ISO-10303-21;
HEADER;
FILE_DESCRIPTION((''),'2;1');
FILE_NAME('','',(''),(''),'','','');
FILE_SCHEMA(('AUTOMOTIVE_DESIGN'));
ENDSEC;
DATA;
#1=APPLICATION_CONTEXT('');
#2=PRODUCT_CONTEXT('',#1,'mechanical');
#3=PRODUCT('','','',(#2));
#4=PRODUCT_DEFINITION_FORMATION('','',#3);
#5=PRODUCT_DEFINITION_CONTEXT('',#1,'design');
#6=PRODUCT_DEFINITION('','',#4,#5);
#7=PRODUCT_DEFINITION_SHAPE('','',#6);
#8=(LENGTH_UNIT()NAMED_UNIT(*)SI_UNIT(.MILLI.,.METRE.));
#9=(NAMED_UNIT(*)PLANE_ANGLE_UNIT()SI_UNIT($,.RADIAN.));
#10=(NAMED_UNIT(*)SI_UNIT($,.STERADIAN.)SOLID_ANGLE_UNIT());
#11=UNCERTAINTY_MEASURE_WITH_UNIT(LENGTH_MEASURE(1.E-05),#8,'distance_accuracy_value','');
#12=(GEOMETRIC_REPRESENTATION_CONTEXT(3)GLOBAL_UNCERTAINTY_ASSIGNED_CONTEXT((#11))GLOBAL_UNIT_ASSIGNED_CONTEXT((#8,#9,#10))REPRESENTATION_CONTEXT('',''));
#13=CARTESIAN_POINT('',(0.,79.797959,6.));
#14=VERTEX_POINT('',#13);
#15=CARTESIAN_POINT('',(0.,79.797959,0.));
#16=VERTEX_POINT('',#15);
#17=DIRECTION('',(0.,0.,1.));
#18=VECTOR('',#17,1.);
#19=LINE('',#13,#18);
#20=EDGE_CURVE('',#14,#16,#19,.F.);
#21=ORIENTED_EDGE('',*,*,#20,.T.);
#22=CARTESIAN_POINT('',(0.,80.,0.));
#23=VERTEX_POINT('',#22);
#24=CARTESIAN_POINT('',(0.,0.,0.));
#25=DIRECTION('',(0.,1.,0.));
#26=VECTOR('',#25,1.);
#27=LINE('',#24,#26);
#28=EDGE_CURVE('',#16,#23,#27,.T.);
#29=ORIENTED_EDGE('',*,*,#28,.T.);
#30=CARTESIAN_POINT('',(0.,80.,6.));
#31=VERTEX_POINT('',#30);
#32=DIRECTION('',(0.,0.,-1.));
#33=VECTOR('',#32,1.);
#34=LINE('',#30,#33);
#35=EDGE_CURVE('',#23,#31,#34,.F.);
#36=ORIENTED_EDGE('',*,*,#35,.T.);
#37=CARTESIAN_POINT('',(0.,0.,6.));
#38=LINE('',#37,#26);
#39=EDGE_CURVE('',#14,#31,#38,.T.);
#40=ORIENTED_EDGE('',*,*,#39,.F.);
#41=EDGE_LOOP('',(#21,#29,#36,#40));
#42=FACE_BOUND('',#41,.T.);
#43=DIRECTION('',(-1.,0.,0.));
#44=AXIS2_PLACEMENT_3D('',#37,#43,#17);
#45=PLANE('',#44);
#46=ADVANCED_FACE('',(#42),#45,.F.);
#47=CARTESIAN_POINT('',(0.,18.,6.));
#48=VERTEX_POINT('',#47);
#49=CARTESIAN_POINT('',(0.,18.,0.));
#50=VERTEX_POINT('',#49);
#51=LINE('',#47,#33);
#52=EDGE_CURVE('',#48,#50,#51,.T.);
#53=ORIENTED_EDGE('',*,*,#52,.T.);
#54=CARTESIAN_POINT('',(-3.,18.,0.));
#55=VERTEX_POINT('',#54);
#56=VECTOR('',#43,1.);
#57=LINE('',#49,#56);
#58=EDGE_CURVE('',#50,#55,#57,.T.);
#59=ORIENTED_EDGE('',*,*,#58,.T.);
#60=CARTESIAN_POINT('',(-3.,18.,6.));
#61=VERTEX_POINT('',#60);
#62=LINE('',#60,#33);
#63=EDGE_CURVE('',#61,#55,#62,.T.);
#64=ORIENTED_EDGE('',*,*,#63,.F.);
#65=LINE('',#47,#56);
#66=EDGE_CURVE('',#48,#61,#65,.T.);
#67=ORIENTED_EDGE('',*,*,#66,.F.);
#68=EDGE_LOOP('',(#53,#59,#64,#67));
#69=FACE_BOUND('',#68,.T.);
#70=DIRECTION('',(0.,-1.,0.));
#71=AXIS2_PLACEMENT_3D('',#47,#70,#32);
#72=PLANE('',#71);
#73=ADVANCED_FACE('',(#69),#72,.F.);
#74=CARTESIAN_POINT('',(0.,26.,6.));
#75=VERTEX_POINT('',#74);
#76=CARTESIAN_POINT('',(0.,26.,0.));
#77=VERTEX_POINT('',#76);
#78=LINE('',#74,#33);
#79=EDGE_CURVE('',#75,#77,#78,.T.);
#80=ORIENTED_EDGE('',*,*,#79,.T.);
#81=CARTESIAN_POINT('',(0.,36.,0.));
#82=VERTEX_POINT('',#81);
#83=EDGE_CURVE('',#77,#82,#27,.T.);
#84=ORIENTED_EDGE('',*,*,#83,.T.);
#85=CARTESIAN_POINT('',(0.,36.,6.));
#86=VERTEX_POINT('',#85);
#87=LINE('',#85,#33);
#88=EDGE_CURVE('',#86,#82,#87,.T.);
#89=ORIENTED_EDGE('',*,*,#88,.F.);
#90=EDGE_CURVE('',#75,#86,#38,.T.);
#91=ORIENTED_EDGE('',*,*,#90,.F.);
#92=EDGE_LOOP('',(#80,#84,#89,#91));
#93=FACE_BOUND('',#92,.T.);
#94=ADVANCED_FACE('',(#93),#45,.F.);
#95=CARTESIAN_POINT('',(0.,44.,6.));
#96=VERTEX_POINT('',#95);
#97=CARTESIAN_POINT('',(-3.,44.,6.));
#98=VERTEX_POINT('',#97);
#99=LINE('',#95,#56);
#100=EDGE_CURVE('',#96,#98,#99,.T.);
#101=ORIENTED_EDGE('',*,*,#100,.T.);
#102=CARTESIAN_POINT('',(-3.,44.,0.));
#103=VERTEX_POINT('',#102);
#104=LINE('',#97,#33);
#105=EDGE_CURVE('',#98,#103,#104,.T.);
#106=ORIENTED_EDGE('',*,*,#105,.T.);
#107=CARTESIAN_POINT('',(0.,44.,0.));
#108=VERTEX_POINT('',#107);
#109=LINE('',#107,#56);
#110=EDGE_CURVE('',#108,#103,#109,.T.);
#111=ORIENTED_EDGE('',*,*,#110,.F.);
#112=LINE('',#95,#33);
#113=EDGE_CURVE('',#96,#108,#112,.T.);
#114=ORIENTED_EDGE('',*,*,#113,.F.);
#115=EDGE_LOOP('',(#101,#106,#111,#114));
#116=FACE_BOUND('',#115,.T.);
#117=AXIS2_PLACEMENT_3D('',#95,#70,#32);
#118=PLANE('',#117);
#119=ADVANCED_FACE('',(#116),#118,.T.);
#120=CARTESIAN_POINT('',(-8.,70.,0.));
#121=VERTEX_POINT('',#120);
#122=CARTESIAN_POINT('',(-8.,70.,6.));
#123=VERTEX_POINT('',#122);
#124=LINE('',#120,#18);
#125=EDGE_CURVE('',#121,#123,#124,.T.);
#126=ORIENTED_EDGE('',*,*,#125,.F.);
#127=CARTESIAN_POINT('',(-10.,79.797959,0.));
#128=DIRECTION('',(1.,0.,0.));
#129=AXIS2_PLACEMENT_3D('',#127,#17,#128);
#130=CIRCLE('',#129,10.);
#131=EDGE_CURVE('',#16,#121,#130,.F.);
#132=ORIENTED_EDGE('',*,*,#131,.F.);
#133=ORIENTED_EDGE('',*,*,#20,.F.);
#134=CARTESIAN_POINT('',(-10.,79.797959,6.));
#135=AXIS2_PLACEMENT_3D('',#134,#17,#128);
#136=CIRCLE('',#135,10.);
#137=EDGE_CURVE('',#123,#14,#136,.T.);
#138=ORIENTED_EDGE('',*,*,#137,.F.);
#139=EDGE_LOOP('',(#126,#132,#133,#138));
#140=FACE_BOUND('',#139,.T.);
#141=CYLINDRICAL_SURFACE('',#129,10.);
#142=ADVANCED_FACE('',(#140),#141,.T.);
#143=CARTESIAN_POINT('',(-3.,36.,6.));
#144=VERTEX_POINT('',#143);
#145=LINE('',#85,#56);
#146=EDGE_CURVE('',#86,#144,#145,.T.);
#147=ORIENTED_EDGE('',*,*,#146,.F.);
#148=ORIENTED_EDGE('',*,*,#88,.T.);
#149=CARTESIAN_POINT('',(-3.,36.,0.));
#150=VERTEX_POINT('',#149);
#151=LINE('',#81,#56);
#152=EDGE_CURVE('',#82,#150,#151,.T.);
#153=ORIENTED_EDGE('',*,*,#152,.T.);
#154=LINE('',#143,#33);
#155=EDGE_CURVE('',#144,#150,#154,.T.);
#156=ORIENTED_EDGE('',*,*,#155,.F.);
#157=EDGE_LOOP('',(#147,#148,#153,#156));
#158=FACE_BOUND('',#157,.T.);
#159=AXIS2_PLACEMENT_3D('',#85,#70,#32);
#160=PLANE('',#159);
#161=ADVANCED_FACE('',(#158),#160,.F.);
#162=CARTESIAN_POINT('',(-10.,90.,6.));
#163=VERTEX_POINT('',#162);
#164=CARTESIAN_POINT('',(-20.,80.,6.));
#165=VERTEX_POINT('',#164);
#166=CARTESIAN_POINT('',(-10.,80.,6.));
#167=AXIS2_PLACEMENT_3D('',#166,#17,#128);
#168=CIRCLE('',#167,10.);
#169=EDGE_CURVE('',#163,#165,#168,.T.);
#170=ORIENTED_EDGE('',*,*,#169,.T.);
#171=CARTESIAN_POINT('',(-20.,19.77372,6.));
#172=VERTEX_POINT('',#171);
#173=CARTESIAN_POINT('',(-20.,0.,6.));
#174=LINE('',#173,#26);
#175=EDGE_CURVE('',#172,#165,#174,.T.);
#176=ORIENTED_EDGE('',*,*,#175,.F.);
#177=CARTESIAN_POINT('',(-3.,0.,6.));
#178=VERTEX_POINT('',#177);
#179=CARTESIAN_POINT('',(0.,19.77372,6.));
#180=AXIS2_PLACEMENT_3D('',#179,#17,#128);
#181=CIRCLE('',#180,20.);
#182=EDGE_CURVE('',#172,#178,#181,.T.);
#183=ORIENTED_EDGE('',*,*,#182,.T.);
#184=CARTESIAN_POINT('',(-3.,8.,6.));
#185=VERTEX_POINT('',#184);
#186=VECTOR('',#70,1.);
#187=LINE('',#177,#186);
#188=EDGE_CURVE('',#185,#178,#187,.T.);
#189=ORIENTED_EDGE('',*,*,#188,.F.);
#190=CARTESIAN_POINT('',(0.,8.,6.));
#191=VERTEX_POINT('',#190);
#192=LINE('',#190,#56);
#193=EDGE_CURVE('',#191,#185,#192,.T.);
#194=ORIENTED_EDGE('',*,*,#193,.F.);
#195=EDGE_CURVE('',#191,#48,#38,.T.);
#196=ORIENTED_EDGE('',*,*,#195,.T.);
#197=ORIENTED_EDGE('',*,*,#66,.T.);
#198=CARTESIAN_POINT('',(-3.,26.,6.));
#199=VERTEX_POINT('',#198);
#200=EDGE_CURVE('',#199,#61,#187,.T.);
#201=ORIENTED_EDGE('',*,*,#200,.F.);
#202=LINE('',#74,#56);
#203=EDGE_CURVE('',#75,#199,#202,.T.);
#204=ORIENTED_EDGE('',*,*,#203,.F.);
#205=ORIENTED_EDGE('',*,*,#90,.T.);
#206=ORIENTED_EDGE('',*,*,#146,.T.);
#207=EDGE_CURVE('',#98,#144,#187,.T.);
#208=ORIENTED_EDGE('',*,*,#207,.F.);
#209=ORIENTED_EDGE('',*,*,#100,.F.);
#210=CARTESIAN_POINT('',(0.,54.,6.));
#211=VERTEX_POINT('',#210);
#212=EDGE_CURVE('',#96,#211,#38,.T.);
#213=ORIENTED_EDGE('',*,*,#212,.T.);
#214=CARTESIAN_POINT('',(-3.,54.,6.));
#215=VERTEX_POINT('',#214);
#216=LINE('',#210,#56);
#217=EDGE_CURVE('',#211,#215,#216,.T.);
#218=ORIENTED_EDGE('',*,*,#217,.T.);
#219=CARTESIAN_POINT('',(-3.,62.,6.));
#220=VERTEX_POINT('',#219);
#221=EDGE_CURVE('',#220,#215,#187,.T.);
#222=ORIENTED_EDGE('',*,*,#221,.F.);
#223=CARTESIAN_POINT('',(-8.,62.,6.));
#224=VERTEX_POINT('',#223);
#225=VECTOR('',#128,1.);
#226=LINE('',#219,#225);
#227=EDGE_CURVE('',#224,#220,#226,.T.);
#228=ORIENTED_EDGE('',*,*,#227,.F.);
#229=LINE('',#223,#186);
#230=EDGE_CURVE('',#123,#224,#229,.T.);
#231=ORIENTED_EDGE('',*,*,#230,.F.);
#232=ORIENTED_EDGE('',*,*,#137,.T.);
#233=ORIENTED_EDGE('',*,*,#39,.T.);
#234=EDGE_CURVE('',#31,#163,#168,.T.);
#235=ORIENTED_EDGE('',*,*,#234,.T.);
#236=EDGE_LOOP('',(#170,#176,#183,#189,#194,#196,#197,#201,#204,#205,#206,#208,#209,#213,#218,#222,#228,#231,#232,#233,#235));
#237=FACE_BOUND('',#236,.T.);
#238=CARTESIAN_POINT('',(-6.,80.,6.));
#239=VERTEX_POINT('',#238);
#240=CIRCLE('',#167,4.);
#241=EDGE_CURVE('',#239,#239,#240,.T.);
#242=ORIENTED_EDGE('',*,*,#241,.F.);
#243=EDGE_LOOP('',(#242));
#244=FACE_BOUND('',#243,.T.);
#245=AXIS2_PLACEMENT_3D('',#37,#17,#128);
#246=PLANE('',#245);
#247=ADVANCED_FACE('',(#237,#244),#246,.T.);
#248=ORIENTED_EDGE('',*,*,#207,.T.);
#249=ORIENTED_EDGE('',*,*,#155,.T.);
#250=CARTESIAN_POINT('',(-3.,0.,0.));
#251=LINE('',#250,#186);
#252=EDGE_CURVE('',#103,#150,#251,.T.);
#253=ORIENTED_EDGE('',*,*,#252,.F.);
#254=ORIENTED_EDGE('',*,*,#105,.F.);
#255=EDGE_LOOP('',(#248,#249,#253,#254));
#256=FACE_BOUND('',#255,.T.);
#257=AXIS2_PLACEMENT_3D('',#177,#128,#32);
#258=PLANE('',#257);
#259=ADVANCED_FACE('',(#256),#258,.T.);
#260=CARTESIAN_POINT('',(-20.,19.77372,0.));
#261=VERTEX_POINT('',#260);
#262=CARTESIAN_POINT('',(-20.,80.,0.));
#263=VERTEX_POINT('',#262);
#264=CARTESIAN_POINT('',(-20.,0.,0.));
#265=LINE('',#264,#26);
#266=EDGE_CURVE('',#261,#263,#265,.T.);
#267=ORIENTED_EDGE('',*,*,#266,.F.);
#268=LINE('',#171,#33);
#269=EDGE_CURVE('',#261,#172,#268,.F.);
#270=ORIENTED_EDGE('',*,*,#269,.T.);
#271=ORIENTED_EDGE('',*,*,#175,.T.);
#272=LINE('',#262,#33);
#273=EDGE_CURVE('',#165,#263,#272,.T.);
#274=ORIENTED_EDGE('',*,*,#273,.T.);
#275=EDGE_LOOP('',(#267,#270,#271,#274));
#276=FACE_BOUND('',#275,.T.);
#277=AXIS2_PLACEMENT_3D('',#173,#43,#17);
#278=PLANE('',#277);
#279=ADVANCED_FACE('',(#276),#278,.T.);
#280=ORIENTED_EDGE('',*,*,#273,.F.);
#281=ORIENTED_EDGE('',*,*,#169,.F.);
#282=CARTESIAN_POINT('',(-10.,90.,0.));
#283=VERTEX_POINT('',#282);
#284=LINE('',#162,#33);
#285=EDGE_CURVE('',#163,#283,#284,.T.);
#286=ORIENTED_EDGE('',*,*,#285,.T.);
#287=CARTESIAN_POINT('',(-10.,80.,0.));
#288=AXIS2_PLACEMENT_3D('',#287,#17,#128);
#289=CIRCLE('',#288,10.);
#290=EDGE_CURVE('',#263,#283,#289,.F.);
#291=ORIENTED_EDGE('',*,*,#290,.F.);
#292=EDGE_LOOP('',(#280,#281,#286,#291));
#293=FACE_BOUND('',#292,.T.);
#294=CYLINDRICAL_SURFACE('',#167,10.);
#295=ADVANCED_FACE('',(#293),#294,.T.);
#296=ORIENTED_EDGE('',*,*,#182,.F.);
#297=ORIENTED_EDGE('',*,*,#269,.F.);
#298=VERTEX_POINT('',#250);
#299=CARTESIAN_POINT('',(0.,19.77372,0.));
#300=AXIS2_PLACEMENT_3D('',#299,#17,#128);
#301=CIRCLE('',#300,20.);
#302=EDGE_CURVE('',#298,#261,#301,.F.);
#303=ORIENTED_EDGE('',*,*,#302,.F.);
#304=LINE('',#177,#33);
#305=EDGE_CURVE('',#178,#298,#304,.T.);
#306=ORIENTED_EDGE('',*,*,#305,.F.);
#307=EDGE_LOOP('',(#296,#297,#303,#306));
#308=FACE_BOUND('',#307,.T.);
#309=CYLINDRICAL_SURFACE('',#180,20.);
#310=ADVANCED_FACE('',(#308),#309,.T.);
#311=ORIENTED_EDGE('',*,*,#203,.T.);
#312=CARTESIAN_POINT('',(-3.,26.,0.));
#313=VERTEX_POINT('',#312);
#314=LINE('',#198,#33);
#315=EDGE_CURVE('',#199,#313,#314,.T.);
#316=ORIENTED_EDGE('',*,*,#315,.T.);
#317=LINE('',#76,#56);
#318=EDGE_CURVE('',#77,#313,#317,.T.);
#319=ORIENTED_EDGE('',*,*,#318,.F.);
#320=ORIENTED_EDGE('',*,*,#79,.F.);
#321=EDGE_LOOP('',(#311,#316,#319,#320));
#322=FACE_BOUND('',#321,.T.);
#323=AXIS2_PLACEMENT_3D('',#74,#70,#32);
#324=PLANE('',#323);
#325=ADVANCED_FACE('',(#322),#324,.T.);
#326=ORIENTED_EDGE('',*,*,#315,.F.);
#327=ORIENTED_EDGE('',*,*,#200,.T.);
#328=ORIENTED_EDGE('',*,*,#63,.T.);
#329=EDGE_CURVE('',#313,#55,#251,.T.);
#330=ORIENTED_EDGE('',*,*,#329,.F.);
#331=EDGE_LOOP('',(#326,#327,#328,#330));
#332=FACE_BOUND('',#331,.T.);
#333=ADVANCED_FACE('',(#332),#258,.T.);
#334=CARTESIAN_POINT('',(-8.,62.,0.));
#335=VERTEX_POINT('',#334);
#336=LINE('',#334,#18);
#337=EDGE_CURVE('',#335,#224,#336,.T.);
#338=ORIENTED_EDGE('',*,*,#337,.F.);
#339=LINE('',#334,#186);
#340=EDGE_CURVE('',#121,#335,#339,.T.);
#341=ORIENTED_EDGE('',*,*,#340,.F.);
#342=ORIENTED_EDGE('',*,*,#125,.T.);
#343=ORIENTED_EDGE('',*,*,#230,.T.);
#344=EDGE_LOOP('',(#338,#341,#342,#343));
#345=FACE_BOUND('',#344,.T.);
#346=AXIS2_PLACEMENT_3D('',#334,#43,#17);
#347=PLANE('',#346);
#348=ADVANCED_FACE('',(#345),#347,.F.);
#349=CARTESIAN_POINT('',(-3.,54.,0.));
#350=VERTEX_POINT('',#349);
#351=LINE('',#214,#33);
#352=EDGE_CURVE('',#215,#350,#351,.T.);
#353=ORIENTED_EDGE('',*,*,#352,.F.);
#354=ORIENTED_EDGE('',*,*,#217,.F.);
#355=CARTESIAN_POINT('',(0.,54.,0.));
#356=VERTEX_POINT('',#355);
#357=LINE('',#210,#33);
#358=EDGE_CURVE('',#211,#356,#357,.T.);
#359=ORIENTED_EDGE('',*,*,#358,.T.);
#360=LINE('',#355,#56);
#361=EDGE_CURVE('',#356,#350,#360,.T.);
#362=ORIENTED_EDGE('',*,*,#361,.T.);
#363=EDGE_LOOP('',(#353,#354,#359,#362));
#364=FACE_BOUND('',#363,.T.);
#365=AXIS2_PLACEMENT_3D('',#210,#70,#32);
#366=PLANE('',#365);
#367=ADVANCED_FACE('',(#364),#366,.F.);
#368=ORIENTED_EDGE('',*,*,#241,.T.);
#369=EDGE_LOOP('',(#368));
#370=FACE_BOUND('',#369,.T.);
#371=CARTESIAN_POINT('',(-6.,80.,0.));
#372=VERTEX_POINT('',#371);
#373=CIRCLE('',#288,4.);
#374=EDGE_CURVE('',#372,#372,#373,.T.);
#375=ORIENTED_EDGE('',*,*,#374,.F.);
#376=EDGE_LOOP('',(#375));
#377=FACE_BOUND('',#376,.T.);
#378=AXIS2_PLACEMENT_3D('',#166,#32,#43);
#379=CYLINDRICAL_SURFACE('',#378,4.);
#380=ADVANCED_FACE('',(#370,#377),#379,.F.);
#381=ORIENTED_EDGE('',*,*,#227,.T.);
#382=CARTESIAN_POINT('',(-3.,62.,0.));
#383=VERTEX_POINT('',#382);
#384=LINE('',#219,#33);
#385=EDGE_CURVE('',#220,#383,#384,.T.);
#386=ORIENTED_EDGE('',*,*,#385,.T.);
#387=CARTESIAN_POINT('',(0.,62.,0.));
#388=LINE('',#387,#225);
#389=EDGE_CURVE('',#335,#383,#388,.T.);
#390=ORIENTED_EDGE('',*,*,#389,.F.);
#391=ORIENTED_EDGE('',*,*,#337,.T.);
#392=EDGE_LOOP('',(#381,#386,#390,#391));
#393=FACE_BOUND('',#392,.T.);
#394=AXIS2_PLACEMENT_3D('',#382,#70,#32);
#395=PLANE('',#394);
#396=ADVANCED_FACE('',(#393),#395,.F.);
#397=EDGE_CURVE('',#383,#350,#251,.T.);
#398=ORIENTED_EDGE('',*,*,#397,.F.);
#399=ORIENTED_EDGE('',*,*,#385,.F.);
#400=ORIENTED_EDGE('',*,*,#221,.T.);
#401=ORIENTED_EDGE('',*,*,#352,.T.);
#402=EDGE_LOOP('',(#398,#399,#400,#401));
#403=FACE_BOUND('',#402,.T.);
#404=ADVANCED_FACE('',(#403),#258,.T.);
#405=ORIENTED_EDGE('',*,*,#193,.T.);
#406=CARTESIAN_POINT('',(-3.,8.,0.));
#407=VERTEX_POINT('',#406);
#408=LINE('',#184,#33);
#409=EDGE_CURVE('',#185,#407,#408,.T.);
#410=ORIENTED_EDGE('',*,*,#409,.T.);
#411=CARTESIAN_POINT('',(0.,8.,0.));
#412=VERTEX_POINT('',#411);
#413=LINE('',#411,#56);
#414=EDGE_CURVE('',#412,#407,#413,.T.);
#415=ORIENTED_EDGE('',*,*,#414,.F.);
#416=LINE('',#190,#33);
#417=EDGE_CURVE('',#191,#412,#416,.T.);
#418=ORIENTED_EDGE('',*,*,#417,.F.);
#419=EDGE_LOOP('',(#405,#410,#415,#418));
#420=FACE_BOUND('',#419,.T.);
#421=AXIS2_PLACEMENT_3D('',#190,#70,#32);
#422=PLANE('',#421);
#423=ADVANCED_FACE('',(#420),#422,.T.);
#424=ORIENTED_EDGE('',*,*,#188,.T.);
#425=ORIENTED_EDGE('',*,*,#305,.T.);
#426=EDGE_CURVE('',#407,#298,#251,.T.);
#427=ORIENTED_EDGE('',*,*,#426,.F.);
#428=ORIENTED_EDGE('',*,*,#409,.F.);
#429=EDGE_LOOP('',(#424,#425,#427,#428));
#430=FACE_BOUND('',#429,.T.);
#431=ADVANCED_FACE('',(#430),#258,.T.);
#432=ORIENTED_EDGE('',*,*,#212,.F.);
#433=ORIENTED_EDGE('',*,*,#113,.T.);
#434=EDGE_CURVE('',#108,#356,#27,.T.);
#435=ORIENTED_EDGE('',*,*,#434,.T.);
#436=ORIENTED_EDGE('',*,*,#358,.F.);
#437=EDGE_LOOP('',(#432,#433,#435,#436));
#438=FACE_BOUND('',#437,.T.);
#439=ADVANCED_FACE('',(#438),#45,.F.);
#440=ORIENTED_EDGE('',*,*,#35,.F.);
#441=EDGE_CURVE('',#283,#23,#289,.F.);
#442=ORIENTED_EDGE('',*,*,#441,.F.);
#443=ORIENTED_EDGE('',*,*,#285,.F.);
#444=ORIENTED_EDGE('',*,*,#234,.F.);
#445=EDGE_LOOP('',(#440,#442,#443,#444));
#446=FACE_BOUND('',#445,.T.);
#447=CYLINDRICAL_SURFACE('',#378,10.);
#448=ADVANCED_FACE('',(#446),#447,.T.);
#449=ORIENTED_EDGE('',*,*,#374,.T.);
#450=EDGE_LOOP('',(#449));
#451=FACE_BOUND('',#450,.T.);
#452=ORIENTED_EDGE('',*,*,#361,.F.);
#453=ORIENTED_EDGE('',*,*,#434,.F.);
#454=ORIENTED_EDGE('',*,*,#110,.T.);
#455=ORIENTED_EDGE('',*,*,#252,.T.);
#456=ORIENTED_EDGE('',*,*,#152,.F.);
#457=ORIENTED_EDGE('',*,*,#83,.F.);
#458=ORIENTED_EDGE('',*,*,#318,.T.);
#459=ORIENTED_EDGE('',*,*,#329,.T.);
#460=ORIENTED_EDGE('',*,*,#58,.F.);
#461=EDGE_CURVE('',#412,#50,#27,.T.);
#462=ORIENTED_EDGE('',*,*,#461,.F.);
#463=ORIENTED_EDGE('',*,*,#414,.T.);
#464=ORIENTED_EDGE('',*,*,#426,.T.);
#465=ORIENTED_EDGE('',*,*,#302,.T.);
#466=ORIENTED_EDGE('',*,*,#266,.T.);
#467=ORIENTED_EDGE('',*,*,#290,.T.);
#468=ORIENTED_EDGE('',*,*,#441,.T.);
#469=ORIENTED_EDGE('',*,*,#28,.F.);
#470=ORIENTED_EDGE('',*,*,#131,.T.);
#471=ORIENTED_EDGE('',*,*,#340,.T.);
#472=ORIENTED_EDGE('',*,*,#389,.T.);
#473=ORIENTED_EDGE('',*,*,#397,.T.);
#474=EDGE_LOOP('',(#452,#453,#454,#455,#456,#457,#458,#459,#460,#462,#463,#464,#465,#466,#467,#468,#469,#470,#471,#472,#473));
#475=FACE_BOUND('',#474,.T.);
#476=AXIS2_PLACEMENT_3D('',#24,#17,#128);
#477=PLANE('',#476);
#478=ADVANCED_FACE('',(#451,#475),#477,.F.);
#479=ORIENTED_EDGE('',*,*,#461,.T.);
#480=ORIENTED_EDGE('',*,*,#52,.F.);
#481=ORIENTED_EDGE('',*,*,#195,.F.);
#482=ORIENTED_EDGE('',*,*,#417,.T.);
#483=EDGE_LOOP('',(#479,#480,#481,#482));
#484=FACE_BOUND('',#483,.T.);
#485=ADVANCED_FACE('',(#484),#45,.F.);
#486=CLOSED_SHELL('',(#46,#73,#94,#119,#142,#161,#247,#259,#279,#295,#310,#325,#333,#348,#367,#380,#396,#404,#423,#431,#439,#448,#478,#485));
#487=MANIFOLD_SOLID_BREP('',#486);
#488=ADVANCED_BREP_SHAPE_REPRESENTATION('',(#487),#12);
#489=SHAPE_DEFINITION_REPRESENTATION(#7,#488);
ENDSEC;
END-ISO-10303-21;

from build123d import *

# Parameters (mm, degrees)
ESQUISSE1_R             = 4
ESQUISSE1_W             = 3
ESQUISSE1_H             = 10
BOSS_EXTRU_1_DEPTH      = 6
ENL_V_MAT_EXTRU_1_DEPTH = 6
CONG_1_R                = 10
CONG_2_R                = 20


with BuildPart() as part:
    # Esquisse1 → Boss.-Extru.1 (new body)
    # profile 1 of 4: a face of its own
    with BuildSketch(Plane.XY):
        Polygon((-3, 44), (-3, 54), (-3, 62), (0, 62), (0, 90), (-20, 90), (-20, 0), (-3, 0), (-3, 8), (-3, 18), (-3, 26), (-3, 36), align=None)
        with Locations((-10, 80)):
            Circle(ESQUISSE1_R, mode=Mode.SUBTRACT)
    # profile 2 of 4: a face of its own
    with BuildSketch(Plane.XY):
        with Locations((-1.5, 49)):
            Rectangle(ESQUISSE1_W, ESQUISSE1_H)
    # profile 3 of 4: a face of its own
    with BuildSketch(Plane.XY):
        with Locations((-1.5, 31)):
            Rectangle(ESQUISSE1_W, ESQUISSE1_H)
    # profile 4 of 4: a face of its own
    with BuildSketch(Plane.XY):
        with Locations((-1.5, 13)):
            Rectangle(ESQUISSE1_W, ESQUISSE1_H)
    extrude(amount=BOSS_EXTRU_1_DEPTH)

    # Esquisse2 → Enlèv. mat.-Extru.1 (cut)
    with BuildSketch(Plane.XY.offset(6)):
        Polygon((-3, 62), (-8, 62), (-8, 70), (0, 70), (0, 62), align=None)
    extrude(amount=-ENL_V_MAT_EXTRU_1_DEPTH, mode=Mode.SUBTRACT)

    # Congé1
    # the kernel refuses this fillet: 10 mm, written as the material it takes off along each edge
    with BuildSketch(Plane(origin=(-20, 90, -25), x_dir=(0, -1, 0), z_dir=(0, 0, 1)), Plane(origin=(0, 90, -25), x_dir=(-1, 0, 0), z_dir=(0, 0, 1))) as cong_1_piece_1:
        with BuildLine():
            CenterArc((CONG_1_R, CONG_1_R), CONG_1_R, 180, 90)
            Line((0, CONG_1_R), (-CONG_1_R * 0.02, CONG_1_R))
            Line((-CONG_1_R * 0.02, CONG_1_R), (-CONG_1_R * 0.02, -CONG_1_R * 0.02))
            Line((-CONG_1_R * 0.02, -CONG_1_R * 0.02), (CONG_1_R, -CONG_1_R * 0.02))
            Line((CONG_1_R, -CONG_1_R * 0.02), (CONG_1_R, 0))
        make_face()
    extrude(amount=56, mode=Mode.SUBTRACT)
    with BuildSketch(Plane(origin=(0, 70, 30.494897428), x_dir=(0, 1, 0), z_dir=(0, 0, -1))) as cong_1_piece_2:
        with BuildLine():
            CenterArc((9.797958971, -10), CONG_1_R, 90, 78.463040967)
            Line((0, -8), (-0.195959179, -7.96))
            ThreePointArc((-0.195959179, -7.96), (-0.2, -4), (-0.2, 0))
            Line((-0.2, 0), (0, 0.2))
            Line((0, 0.2), (9.797958971, 0.2))
            Line((9.797958971, 0.2), (9.797958971, 0))
        make_face()
    extrude(amount=54.989794856, mode=Mode.SUBTRACT)

    # Congé2
    # the kernel refuses this fillet: 20 mm, written as the material it takes off along each edge
    with BuildSketch(Plane(origin=(-20, 0, -49.434299833), x_dir=(1, 0, 0), z_dir=(0, 0, 1))) as cong_2_piece_1:
        with BuildLine():
            CenterArc((20, 19.773719933), CONG_2_R, 180, 81.373073441)
            Line((0, 19.773719933), (-0.4, 19.773719933))
            Line((-0.4, 19.773719933), (-0.4, 0))
            Line((-0.4, 0), (0, -0.4))
            ThreePointArc((0, -0.4), (8.5, -0.4), (16.94, -0.395474399))
            Line((16.94, -0.395474399), (17, 0))
        make_face()
    extrude(amount=104.868599666, mode=Mode.SUBTRACT)


solid = part.part
